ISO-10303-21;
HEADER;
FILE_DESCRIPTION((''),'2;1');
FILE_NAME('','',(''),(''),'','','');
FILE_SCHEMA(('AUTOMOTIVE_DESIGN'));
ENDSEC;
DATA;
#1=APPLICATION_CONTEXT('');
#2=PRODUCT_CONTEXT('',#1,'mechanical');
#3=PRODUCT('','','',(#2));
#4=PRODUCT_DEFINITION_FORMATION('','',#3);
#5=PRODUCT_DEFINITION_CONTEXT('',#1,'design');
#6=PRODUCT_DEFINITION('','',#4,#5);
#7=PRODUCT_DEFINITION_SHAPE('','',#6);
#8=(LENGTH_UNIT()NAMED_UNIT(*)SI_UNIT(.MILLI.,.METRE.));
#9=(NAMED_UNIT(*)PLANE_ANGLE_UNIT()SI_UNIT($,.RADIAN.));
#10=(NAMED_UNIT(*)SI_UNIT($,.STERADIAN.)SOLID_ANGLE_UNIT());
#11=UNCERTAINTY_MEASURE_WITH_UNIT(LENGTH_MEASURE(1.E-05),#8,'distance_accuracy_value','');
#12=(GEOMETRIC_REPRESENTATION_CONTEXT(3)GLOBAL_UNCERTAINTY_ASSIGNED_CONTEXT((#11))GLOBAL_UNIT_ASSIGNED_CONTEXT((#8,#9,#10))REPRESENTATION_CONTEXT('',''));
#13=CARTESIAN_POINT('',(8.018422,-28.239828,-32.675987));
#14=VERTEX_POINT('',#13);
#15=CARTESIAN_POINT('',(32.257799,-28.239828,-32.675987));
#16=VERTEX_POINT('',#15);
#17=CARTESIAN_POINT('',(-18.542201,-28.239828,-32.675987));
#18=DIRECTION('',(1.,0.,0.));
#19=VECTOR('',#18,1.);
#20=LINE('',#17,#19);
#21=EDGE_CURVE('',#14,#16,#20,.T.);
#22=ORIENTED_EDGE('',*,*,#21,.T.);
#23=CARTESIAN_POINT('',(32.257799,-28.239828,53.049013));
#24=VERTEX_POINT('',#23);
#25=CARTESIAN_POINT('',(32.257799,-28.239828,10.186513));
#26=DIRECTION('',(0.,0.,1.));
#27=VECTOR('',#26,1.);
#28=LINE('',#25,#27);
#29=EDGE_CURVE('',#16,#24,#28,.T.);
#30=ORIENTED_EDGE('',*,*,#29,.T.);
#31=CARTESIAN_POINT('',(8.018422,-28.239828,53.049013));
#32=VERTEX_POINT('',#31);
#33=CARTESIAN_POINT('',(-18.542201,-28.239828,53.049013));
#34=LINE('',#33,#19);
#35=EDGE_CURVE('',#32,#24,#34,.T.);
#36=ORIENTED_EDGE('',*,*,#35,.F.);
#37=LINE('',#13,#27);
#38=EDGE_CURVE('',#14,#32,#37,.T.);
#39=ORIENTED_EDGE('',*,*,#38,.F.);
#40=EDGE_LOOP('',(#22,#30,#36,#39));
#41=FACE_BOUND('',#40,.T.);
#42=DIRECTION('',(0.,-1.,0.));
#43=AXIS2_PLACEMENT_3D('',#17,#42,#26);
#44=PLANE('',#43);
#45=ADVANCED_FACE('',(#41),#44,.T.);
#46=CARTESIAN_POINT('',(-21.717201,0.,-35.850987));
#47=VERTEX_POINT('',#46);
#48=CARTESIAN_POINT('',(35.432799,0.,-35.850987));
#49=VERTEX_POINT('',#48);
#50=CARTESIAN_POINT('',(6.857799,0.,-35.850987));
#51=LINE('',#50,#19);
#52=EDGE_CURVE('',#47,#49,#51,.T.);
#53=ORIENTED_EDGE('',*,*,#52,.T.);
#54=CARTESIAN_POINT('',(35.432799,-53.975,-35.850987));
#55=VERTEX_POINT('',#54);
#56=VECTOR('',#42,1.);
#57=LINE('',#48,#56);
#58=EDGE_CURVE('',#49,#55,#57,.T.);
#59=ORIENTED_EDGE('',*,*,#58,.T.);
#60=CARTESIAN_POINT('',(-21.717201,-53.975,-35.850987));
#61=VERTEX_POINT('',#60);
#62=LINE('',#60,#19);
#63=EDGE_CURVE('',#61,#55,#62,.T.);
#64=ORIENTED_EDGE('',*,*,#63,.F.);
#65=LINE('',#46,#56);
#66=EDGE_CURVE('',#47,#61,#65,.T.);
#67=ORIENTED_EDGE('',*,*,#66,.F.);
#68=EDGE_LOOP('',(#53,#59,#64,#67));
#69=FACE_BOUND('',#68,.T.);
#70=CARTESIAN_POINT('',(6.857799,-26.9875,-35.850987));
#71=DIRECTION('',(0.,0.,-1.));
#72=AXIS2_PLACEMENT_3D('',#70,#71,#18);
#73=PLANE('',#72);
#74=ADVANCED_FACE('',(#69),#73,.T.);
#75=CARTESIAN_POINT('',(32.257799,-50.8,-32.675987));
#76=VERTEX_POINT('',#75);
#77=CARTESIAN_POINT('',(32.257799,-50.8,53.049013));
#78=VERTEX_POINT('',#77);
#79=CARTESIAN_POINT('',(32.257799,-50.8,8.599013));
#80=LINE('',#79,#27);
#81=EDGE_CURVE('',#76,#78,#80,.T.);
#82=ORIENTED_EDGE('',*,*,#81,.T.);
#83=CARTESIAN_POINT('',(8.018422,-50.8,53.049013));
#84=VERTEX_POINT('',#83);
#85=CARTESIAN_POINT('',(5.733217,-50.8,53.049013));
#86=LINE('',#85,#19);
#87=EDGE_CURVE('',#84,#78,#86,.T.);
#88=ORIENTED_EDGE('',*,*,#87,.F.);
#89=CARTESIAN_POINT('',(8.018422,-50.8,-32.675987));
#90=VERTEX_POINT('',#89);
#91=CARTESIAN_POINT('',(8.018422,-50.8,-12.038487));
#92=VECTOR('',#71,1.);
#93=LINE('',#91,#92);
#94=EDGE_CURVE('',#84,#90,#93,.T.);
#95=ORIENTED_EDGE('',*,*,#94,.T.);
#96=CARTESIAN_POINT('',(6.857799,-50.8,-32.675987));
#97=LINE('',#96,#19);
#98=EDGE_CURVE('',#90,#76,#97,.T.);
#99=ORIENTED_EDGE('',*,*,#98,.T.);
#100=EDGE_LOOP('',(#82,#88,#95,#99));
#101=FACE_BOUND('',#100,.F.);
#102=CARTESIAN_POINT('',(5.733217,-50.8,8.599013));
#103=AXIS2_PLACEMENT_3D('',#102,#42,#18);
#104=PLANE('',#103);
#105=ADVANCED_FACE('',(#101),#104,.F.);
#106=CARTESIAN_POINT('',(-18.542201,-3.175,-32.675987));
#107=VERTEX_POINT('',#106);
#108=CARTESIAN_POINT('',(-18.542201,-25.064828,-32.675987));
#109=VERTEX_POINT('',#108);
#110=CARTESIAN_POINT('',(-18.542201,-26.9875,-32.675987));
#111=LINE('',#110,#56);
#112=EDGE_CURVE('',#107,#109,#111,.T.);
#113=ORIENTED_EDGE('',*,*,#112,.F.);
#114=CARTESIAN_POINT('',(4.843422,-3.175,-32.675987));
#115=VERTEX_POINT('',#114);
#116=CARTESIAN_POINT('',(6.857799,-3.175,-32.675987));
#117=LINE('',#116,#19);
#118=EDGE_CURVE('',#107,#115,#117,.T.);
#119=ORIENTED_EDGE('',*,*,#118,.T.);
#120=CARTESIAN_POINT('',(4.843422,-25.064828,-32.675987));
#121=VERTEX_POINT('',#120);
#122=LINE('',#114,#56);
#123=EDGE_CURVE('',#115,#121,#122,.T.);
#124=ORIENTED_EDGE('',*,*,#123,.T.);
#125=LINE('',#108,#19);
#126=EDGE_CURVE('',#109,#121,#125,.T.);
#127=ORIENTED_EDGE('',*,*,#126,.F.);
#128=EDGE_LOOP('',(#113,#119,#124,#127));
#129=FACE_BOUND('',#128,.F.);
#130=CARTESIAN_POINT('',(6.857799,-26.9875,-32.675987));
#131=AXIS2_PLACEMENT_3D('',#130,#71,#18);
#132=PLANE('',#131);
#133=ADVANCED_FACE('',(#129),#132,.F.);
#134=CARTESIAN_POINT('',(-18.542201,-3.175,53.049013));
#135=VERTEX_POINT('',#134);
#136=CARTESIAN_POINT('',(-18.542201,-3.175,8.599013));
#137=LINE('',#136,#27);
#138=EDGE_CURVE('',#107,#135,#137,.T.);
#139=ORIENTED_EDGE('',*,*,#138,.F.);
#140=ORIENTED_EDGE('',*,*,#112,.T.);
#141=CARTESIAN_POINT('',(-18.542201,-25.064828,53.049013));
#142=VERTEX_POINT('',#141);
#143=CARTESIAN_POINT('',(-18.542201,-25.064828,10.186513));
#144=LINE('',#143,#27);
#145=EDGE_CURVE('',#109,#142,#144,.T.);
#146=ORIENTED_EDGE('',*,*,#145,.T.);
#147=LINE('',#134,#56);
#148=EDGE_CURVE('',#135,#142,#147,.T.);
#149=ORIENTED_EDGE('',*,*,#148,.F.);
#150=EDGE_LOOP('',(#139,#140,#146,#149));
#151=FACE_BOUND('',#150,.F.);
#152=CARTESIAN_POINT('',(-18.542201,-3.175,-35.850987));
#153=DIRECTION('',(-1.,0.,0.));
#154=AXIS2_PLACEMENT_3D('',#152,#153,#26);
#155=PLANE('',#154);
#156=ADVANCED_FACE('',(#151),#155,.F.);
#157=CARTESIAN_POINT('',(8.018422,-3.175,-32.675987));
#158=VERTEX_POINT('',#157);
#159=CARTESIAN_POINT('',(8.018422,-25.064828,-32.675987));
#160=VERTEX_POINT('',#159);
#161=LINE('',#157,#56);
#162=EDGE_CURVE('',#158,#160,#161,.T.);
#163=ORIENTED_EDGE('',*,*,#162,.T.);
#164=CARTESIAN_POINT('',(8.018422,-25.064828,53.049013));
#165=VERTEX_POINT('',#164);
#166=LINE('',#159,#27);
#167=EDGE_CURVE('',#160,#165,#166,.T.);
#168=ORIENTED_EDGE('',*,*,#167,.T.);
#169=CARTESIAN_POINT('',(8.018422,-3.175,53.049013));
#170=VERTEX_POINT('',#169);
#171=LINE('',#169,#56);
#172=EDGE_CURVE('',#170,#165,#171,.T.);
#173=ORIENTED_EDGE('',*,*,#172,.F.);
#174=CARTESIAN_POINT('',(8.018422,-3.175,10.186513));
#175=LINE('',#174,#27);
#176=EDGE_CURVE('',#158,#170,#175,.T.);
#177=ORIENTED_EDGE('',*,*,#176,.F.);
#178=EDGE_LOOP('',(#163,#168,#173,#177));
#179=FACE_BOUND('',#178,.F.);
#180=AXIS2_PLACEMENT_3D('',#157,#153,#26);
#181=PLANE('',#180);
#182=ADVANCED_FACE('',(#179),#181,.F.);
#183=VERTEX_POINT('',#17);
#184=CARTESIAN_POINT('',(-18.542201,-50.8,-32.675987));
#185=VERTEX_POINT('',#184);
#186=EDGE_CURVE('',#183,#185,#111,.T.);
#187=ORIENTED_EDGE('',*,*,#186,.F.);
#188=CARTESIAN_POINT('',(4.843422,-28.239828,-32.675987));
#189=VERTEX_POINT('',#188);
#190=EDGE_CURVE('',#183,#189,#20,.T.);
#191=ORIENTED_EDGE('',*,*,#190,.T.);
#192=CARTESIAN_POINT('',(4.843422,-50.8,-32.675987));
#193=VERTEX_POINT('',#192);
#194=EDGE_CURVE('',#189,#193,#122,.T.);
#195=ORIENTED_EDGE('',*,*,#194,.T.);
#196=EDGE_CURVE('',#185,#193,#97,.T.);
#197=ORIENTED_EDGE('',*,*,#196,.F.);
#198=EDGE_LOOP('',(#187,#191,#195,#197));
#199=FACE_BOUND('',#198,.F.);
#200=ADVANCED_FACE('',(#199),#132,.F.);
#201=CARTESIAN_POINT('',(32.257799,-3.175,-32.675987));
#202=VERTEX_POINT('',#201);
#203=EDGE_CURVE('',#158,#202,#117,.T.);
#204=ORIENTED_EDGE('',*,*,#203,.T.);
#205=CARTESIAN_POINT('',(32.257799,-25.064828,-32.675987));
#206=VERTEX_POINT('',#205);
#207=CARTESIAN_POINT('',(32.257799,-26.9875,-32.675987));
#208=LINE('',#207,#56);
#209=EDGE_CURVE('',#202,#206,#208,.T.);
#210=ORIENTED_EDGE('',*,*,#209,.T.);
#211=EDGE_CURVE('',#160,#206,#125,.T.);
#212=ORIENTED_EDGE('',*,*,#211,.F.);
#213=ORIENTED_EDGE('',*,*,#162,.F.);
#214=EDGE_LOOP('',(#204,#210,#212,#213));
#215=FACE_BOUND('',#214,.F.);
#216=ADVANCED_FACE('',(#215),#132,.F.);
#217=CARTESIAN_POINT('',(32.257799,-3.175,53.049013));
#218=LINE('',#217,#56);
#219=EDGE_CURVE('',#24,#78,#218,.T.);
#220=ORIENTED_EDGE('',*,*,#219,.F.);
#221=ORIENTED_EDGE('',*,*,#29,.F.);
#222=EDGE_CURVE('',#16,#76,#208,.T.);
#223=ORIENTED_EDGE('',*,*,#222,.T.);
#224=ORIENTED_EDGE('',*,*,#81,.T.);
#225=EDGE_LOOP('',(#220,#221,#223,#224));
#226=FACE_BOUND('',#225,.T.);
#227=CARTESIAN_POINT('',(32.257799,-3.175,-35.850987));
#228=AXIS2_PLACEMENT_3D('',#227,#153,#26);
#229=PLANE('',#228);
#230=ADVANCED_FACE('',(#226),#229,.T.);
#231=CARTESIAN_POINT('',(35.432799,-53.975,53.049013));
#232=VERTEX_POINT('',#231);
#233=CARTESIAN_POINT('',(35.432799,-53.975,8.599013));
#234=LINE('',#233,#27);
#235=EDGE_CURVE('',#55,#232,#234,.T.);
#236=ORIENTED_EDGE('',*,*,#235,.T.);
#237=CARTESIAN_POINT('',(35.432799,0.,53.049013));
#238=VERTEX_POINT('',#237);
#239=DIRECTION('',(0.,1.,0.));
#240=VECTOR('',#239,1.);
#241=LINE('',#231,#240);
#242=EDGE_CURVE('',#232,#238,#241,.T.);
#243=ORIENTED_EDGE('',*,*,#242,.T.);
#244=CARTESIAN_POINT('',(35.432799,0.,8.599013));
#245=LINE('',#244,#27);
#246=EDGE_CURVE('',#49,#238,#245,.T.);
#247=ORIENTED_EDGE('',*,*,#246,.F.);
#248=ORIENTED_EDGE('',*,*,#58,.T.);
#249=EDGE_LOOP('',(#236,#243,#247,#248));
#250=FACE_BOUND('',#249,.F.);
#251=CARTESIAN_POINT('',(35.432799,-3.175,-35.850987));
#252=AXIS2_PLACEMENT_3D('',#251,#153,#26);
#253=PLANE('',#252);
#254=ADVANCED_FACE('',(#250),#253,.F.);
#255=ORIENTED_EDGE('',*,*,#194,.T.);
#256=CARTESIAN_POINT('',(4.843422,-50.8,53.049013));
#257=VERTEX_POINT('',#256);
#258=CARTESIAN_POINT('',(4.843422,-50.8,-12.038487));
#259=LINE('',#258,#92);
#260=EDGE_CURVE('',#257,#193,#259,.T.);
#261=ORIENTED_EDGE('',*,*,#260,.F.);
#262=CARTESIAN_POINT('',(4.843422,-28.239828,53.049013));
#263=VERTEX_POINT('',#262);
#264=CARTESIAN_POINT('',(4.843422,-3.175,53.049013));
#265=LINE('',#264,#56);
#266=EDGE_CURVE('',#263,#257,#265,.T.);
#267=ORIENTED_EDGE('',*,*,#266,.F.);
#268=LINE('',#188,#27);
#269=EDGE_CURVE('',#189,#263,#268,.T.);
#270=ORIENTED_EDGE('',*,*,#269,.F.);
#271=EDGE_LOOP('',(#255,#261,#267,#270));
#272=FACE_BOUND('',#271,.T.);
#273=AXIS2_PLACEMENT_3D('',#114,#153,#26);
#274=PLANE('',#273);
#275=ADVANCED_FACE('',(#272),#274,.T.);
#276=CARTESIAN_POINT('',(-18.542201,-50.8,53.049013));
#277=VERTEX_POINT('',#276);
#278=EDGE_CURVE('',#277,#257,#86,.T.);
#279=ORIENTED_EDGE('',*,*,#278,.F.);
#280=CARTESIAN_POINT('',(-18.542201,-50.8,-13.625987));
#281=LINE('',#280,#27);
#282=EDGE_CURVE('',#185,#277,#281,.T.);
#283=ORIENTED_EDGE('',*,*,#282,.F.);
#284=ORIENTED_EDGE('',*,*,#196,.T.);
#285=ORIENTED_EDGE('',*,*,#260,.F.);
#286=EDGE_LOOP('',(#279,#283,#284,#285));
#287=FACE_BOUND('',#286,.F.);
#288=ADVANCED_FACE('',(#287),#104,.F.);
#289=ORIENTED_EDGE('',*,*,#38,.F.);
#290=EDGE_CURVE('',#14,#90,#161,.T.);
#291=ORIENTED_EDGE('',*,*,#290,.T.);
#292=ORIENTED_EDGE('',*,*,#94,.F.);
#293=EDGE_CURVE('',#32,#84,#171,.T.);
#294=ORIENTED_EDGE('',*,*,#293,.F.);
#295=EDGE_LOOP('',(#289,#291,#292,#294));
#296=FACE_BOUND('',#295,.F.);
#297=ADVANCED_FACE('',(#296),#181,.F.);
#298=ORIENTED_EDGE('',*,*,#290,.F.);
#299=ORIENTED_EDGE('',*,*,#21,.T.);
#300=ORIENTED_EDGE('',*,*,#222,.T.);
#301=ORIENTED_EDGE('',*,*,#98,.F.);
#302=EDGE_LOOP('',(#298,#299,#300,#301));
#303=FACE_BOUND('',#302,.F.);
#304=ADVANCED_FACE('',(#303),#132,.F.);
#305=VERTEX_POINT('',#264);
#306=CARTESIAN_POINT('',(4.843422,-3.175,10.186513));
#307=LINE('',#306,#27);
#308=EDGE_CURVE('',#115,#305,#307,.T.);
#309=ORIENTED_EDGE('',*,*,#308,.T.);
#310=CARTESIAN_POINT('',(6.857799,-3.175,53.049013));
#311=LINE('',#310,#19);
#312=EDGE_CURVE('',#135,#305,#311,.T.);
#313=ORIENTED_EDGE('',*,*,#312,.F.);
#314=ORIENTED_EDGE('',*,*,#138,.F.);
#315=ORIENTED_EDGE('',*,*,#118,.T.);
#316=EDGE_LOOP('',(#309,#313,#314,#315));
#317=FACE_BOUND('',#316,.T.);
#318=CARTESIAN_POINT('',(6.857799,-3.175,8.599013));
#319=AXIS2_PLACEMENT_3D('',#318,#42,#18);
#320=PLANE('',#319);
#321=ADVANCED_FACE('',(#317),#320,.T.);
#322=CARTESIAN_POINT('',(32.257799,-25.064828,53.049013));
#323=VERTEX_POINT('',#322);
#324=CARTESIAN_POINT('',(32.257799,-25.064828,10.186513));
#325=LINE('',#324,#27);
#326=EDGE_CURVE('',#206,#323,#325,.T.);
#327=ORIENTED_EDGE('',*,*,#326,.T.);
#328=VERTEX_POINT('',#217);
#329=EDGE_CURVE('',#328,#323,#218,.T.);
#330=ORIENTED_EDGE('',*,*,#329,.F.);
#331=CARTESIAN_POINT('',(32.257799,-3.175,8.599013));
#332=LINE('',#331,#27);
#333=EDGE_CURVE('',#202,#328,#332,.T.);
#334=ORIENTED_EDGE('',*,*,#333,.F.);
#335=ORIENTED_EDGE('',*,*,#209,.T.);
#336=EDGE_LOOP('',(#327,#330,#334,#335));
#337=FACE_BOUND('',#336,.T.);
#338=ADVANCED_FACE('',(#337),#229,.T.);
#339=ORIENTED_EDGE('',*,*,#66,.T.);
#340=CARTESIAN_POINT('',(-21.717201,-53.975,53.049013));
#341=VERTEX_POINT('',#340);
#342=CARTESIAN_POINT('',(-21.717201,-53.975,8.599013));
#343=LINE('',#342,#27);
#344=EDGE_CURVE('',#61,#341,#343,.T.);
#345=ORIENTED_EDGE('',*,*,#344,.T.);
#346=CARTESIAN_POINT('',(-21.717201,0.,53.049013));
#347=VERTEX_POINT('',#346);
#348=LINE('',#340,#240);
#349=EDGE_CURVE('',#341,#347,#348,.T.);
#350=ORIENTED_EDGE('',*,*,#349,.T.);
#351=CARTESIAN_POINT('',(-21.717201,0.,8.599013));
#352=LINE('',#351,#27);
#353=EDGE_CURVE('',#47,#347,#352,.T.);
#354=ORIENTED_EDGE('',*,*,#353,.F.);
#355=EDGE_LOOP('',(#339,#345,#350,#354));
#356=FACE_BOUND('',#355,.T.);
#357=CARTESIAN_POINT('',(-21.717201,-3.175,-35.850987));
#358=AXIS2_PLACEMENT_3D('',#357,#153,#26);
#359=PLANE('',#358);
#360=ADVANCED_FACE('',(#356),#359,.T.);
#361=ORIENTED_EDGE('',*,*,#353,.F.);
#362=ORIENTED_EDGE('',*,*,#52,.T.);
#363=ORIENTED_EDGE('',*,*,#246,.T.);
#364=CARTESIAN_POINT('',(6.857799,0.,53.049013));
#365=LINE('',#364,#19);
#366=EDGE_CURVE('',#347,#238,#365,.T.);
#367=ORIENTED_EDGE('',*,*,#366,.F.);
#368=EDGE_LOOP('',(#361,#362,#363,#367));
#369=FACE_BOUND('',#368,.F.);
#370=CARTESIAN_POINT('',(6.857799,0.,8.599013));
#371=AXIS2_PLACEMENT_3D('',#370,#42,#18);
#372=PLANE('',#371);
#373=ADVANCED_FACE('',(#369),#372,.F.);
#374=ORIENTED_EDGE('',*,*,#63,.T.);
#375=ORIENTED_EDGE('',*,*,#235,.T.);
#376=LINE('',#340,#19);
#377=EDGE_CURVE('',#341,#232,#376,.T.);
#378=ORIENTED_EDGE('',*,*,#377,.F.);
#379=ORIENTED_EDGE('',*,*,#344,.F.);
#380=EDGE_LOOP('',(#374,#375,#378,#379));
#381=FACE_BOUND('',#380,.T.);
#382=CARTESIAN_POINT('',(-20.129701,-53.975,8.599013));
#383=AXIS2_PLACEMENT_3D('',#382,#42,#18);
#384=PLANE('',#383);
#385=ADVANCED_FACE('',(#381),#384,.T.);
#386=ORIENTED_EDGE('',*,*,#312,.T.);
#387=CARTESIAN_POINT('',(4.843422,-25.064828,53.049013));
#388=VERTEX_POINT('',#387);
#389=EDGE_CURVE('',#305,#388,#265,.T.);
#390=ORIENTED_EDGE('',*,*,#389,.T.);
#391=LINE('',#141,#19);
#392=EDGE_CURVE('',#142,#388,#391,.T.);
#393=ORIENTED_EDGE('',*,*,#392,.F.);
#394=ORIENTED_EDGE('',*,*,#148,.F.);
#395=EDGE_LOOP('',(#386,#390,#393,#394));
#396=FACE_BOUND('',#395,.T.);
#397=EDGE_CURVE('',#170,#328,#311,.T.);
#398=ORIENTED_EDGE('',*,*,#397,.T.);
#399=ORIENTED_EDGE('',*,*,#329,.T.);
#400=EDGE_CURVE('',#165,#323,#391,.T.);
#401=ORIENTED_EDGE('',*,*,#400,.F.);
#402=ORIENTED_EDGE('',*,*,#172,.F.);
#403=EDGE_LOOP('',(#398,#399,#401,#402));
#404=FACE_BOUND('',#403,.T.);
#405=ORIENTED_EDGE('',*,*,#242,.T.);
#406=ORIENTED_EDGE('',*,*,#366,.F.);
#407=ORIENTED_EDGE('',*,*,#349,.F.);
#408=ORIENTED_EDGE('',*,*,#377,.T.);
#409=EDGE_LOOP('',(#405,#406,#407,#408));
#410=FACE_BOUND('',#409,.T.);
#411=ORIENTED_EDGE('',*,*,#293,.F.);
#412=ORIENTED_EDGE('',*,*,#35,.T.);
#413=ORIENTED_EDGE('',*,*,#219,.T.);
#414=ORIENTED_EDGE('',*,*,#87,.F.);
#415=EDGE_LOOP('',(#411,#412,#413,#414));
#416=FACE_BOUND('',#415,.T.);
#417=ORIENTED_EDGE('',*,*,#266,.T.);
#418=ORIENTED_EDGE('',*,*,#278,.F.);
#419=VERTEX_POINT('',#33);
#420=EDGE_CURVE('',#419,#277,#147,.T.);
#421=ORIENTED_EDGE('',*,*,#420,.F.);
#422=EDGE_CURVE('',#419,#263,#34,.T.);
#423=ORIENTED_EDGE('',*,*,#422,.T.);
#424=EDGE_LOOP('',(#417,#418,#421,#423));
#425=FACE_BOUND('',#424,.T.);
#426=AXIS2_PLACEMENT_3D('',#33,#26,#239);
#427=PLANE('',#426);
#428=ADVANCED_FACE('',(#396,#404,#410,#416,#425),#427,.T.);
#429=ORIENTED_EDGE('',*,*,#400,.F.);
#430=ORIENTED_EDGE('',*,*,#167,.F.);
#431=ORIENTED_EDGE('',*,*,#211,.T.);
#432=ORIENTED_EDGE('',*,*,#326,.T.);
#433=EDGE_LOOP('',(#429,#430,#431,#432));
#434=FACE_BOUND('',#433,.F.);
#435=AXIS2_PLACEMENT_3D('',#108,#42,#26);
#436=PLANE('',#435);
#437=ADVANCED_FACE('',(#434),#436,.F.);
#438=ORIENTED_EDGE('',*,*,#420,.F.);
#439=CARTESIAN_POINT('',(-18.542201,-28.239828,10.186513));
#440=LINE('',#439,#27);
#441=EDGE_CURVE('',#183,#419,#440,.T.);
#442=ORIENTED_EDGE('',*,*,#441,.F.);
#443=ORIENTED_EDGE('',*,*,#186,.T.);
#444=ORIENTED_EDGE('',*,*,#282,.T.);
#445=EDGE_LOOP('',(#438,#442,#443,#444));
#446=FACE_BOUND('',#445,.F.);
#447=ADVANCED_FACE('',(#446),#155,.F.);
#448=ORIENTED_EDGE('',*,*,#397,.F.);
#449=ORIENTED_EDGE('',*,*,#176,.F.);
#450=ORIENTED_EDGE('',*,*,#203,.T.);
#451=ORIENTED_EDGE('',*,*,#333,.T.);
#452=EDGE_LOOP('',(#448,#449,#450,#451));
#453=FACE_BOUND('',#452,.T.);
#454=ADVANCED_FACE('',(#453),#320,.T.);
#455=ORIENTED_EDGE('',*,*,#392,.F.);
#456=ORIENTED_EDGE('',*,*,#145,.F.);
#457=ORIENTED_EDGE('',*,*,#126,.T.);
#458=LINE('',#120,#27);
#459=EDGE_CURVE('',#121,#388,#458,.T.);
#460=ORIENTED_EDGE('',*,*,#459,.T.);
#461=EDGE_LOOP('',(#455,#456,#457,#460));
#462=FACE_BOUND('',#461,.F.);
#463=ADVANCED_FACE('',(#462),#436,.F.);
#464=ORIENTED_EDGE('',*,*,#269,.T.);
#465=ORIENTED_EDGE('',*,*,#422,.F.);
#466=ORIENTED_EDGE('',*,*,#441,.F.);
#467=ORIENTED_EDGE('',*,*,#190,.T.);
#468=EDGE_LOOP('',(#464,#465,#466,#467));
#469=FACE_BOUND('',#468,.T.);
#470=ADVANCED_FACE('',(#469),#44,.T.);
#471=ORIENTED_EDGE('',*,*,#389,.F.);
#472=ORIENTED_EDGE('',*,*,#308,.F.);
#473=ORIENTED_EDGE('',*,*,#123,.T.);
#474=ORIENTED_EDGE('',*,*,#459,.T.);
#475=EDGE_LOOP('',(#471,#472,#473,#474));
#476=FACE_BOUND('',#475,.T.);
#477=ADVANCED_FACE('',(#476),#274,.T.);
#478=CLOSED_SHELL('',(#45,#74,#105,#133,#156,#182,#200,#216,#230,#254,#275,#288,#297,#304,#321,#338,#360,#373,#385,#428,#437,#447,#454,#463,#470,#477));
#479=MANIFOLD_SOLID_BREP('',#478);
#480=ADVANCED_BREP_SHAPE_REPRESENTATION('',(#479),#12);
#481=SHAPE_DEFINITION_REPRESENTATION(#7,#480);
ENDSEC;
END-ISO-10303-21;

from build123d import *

# Parameters (mm, degrees)
F0_W      = 57.15
F0_H      = 88.9
F1_DEPTH  = 3.175
F2_W      = 3.175
F2_H      = 88.9
F3_DEPTH  = 50.8
F4_W      = 3.175
F4_H      = 88.9
F5_DEPTH  = 50.8
F6_W      = 53.0491641998
F6_H      = 88.9
F7_DEPTH  = 3.175
F8_W      = 50.8
F8_H      = 47.625
F9_DEPTH  = 3.175
F11_W     = 50.8
F11_H     = 47.625
F12_DEPTH = 3.175
F13_W     = 3.175
F13_H     = 85.725
F14_DEPTH = 50.8
F15_W     = 3.175
F15_H     = 85.725
F16_DEPTH = 50.8


with BuildPart() as f1:
    # F0 (on Front) → F1 (new body)
    with BuildSketch(Plane.XZ):
        with Locations((6.8577993661, 8.5990129304)):
            Rectangle(F0_W, F0_H)
    extrude(amount=F1_DEPTH)

    # F2 (on face) → F3 (join)
    with BuildSketch(Plane.XZ.offset(3.175)):
        with Locations((-20.1297006339, 8.5990129304)):
            Rectangle(F2_W, F2_H)
    extrude(amount=F3_DEPTH)

    # F4 (on face) → F5 (join)
    with BuildSketch(Plane.XZ.offset(3.175)):
        with Locations((33.8452993661, 8.5990129304)):
            Rectangle(F4_W, F4_H)
    extrude(amount=F5_DEPTH)

    # F6 (on face) → F7 (join)
    with BuildSketch(Plane.XZ.offset(53.975)):
        with Locations((5.7332172662, 8.5990129304)):
            Rectangle(F6_W, F6_H)
    extrude(amount=-F7_DEPTH)

    # F11 (on face) → F12 (join)
    with BuildSketch(Plane(origin=(0, 0, -35.8509870696), x_dir=(1, 0, 0), z_dir=(0, 0, -1))):
        with Locations((6.8577993661, 26.9875)):
            Rectangle(F11_W, F11_H)
    extrude(amount=-F12_DEPTH)

    # F13 (on face) → F14 (join)
    with BuildSketch(Plane.XZ.offset(3.175)):
        with Locations((6.430921746, 10.1865129304)):
            Rectangle(F13_W, F13_H)
    extrude(amount=F14_DEPTH)

    # F15 (on face) → F16 (join)
    with BuildSketch(Plane.YZ.offset(-18.5422006339)):
        with Locations((-26.6523276031, 10.1865129304)):
            Rectangle(F15_W, F15_H)
    extrude(amount=F16_DEPTH)


with BuildPart() as f9:
    # F8 (on face) → F9 (new body)
    with BuildSketch(Plane(origin=(0, 0, -35.8509870696), x_dir=(1, 0, 0), z_dir=(0, 0, -1))):
        with Locations((6.8577993661, 26.9875)):
            Rectangle(F8_W, F8_H)
    extrude(amount=-F9_DEPTH)


solid = f1.part
